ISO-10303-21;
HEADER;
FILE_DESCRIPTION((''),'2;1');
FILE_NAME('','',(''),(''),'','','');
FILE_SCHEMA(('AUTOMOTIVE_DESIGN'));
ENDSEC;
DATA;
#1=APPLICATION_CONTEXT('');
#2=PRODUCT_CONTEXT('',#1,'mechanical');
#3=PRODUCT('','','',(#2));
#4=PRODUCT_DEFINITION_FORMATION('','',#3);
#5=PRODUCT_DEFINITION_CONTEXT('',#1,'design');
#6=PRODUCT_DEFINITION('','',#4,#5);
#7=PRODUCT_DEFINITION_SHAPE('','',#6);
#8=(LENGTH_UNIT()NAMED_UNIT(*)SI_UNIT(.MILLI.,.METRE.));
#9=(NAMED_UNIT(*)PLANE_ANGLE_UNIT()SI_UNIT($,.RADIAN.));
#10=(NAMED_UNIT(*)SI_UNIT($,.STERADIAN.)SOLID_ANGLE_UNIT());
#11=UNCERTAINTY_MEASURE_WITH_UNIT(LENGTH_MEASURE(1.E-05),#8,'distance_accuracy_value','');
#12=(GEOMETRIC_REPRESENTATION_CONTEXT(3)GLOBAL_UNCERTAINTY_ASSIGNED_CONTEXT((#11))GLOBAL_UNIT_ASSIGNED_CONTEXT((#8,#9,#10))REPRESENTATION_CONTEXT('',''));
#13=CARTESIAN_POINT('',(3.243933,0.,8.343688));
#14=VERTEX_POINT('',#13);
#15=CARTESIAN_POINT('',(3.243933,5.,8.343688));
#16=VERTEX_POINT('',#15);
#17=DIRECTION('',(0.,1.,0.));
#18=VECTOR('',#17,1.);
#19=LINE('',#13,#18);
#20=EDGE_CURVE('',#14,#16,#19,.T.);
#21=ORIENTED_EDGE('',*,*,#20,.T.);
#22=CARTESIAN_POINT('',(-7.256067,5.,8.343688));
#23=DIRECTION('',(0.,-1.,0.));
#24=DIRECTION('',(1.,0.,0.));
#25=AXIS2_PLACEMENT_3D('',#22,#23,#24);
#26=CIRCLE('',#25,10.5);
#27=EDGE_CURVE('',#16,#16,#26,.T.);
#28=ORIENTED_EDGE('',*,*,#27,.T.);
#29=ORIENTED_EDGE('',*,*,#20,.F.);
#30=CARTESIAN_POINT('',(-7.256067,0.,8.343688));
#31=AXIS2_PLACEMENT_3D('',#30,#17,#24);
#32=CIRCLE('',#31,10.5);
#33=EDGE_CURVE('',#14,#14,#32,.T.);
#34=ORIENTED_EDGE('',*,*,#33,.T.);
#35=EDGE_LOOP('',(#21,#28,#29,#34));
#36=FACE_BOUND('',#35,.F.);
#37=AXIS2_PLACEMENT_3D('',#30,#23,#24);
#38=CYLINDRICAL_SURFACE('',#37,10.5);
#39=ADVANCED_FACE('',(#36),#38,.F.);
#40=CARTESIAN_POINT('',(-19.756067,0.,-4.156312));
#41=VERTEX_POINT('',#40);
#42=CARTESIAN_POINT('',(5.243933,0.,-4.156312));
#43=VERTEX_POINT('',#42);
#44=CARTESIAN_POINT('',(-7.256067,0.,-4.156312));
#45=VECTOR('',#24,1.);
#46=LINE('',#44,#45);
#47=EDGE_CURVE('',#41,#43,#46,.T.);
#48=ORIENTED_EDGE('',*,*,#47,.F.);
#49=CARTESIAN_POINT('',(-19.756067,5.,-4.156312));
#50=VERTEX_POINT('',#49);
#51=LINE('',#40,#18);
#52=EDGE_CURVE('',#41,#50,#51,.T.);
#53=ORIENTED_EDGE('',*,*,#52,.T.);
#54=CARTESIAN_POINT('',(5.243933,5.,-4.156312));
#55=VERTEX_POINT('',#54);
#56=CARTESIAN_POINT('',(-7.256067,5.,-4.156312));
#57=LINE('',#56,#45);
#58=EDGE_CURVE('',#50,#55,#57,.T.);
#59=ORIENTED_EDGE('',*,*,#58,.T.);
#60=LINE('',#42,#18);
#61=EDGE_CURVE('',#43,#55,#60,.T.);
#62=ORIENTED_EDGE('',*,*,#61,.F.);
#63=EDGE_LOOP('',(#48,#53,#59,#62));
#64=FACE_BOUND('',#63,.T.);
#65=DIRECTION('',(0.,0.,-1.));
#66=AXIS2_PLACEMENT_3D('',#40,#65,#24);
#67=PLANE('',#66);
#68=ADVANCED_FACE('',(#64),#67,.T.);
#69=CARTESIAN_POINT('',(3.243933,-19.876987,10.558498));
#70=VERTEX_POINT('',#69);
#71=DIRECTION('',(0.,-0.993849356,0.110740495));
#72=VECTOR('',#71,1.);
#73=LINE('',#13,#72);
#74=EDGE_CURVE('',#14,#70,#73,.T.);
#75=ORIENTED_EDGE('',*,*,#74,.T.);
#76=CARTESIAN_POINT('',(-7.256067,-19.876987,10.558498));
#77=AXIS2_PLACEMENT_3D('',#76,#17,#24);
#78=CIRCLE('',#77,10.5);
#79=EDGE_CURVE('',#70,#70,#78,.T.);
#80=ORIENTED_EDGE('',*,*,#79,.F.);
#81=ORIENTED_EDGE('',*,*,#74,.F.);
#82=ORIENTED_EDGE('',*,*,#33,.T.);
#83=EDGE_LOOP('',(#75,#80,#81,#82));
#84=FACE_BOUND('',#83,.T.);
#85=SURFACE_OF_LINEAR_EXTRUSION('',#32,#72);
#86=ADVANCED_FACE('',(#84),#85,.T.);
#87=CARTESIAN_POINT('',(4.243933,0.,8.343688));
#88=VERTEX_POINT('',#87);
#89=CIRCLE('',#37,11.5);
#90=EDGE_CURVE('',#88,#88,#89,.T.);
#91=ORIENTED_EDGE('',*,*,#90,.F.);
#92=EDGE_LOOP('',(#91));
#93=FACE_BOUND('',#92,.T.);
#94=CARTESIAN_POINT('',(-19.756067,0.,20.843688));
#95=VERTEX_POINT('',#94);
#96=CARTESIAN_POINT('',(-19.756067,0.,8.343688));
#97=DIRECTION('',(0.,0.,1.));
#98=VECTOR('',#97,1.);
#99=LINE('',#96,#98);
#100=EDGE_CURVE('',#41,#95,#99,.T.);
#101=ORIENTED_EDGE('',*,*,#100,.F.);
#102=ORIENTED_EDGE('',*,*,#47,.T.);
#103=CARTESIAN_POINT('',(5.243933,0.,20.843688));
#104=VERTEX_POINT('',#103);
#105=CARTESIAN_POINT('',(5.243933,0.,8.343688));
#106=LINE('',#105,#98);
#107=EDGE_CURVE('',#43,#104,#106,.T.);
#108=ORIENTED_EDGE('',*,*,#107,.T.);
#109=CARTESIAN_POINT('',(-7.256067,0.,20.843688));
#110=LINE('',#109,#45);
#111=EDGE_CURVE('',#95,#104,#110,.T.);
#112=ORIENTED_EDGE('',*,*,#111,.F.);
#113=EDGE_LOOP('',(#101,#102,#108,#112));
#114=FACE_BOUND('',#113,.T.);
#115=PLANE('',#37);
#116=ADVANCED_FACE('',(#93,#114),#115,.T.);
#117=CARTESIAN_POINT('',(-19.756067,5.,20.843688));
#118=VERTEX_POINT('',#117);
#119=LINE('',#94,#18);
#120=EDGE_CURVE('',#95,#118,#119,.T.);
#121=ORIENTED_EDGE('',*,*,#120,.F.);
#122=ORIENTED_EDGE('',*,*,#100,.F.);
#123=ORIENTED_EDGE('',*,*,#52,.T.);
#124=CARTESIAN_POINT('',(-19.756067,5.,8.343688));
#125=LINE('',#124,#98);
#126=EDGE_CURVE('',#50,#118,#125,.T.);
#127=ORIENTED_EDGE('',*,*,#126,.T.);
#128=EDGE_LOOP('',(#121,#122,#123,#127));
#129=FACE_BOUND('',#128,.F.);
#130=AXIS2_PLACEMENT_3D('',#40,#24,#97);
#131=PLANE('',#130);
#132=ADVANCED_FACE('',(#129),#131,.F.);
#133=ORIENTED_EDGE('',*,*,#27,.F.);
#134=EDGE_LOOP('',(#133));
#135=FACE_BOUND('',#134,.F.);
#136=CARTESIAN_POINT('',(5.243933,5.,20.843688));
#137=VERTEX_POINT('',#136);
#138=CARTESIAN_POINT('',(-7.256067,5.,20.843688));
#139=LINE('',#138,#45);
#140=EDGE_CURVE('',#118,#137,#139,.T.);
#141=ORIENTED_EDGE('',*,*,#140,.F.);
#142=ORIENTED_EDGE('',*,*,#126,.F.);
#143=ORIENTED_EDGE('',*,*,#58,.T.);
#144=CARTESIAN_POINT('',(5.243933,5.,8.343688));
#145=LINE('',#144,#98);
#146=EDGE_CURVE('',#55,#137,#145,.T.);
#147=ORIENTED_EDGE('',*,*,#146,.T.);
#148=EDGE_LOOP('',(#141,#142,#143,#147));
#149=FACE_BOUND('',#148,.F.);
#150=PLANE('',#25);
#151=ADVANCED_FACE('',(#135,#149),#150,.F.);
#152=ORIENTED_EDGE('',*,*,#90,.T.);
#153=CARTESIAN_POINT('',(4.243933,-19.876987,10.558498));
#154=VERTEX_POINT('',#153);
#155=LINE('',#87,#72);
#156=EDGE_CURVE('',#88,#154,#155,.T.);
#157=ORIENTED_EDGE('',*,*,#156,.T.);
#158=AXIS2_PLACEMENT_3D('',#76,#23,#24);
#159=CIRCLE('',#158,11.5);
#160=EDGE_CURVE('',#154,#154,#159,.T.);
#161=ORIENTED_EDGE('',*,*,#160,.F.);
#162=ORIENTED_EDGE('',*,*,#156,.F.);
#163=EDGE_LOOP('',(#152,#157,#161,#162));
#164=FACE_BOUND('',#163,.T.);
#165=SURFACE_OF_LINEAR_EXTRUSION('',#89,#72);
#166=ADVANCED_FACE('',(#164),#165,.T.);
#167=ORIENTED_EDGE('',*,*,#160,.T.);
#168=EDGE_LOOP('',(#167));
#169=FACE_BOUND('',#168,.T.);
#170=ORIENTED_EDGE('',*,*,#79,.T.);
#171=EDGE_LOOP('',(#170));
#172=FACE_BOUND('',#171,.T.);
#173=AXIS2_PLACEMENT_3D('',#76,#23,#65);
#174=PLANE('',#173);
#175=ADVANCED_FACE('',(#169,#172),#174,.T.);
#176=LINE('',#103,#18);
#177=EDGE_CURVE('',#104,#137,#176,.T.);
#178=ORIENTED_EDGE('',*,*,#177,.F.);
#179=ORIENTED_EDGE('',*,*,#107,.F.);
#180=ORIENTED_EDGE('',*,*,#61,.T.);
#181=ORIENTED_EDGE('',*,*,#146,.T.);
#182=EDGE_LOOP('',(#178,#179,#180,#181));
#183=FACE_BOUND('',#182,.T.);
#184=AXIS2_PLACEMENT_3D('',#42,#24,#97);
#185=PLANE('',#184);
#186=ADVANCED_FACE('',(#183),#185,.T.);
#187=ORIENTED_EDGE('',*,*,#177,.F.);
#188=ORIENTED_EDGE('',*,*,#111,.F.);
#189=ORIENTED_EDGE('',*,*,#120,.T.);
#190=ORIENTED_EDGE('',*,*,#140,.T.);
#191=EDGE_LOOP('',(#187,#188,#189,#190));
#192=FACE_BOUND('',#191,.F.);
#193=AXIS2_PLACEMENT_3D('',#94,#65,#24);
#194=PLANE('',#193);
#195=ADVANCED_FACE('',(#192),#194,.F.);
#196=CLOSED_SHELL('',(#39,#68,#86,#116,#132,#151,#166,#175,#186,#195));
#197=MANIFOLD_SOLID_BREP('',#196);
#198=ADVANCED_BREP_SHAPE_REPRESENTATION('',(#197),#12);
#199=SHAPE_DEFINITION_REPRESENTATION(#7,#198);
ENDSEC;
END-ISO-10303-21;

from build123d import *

# Parameters (mm, degrees)
F1_R     = 11.5
F1_R_2   = 10.5
F0_W     = 25
F0_H     = 25
F4_DEPTH = 5
F5_R     = 10.5
F6_DEPTH = 5.001


with BuildPart() as f3:
    # F3: sweep along a path in F2
    with BuildLine(Plane.YZ) as f3_path:
        Line((0, 8.3436881795), (-19.8769871225, 10.5584980885))
    # F1 (on face) → F3 (sweep)
    with BuildSketch(Plane.XZ):
        with Locations((-7.256067358, 8.3436881795)):
            Circle(F1_R)
        with Locations((-7.256067358, 8.3436881795)):
            Circle(F1_R_2, mode=Mode.SUBTRACT)
    sweep(path=f3_path.line)

    # F0 (on Front) → F4 (join)
    with BuildSketch(Plane.XZ):
        with Locations((-7.256067358, 8.3436881795)):
            Rectangle(F0_W, F0_H)
    extrude(amount=-F4_DEPTH)

    # F5 (on face) → F6 (cut, through all)
    with BuildSketch(Plane.XZ):
        with Locations((-7.256067358, 8.3436881795)):
            Circle(F5_R)
    extrude(amount=-F6_DEPTH, mode=Mode.SUBTRACT)


solid = f3.part
